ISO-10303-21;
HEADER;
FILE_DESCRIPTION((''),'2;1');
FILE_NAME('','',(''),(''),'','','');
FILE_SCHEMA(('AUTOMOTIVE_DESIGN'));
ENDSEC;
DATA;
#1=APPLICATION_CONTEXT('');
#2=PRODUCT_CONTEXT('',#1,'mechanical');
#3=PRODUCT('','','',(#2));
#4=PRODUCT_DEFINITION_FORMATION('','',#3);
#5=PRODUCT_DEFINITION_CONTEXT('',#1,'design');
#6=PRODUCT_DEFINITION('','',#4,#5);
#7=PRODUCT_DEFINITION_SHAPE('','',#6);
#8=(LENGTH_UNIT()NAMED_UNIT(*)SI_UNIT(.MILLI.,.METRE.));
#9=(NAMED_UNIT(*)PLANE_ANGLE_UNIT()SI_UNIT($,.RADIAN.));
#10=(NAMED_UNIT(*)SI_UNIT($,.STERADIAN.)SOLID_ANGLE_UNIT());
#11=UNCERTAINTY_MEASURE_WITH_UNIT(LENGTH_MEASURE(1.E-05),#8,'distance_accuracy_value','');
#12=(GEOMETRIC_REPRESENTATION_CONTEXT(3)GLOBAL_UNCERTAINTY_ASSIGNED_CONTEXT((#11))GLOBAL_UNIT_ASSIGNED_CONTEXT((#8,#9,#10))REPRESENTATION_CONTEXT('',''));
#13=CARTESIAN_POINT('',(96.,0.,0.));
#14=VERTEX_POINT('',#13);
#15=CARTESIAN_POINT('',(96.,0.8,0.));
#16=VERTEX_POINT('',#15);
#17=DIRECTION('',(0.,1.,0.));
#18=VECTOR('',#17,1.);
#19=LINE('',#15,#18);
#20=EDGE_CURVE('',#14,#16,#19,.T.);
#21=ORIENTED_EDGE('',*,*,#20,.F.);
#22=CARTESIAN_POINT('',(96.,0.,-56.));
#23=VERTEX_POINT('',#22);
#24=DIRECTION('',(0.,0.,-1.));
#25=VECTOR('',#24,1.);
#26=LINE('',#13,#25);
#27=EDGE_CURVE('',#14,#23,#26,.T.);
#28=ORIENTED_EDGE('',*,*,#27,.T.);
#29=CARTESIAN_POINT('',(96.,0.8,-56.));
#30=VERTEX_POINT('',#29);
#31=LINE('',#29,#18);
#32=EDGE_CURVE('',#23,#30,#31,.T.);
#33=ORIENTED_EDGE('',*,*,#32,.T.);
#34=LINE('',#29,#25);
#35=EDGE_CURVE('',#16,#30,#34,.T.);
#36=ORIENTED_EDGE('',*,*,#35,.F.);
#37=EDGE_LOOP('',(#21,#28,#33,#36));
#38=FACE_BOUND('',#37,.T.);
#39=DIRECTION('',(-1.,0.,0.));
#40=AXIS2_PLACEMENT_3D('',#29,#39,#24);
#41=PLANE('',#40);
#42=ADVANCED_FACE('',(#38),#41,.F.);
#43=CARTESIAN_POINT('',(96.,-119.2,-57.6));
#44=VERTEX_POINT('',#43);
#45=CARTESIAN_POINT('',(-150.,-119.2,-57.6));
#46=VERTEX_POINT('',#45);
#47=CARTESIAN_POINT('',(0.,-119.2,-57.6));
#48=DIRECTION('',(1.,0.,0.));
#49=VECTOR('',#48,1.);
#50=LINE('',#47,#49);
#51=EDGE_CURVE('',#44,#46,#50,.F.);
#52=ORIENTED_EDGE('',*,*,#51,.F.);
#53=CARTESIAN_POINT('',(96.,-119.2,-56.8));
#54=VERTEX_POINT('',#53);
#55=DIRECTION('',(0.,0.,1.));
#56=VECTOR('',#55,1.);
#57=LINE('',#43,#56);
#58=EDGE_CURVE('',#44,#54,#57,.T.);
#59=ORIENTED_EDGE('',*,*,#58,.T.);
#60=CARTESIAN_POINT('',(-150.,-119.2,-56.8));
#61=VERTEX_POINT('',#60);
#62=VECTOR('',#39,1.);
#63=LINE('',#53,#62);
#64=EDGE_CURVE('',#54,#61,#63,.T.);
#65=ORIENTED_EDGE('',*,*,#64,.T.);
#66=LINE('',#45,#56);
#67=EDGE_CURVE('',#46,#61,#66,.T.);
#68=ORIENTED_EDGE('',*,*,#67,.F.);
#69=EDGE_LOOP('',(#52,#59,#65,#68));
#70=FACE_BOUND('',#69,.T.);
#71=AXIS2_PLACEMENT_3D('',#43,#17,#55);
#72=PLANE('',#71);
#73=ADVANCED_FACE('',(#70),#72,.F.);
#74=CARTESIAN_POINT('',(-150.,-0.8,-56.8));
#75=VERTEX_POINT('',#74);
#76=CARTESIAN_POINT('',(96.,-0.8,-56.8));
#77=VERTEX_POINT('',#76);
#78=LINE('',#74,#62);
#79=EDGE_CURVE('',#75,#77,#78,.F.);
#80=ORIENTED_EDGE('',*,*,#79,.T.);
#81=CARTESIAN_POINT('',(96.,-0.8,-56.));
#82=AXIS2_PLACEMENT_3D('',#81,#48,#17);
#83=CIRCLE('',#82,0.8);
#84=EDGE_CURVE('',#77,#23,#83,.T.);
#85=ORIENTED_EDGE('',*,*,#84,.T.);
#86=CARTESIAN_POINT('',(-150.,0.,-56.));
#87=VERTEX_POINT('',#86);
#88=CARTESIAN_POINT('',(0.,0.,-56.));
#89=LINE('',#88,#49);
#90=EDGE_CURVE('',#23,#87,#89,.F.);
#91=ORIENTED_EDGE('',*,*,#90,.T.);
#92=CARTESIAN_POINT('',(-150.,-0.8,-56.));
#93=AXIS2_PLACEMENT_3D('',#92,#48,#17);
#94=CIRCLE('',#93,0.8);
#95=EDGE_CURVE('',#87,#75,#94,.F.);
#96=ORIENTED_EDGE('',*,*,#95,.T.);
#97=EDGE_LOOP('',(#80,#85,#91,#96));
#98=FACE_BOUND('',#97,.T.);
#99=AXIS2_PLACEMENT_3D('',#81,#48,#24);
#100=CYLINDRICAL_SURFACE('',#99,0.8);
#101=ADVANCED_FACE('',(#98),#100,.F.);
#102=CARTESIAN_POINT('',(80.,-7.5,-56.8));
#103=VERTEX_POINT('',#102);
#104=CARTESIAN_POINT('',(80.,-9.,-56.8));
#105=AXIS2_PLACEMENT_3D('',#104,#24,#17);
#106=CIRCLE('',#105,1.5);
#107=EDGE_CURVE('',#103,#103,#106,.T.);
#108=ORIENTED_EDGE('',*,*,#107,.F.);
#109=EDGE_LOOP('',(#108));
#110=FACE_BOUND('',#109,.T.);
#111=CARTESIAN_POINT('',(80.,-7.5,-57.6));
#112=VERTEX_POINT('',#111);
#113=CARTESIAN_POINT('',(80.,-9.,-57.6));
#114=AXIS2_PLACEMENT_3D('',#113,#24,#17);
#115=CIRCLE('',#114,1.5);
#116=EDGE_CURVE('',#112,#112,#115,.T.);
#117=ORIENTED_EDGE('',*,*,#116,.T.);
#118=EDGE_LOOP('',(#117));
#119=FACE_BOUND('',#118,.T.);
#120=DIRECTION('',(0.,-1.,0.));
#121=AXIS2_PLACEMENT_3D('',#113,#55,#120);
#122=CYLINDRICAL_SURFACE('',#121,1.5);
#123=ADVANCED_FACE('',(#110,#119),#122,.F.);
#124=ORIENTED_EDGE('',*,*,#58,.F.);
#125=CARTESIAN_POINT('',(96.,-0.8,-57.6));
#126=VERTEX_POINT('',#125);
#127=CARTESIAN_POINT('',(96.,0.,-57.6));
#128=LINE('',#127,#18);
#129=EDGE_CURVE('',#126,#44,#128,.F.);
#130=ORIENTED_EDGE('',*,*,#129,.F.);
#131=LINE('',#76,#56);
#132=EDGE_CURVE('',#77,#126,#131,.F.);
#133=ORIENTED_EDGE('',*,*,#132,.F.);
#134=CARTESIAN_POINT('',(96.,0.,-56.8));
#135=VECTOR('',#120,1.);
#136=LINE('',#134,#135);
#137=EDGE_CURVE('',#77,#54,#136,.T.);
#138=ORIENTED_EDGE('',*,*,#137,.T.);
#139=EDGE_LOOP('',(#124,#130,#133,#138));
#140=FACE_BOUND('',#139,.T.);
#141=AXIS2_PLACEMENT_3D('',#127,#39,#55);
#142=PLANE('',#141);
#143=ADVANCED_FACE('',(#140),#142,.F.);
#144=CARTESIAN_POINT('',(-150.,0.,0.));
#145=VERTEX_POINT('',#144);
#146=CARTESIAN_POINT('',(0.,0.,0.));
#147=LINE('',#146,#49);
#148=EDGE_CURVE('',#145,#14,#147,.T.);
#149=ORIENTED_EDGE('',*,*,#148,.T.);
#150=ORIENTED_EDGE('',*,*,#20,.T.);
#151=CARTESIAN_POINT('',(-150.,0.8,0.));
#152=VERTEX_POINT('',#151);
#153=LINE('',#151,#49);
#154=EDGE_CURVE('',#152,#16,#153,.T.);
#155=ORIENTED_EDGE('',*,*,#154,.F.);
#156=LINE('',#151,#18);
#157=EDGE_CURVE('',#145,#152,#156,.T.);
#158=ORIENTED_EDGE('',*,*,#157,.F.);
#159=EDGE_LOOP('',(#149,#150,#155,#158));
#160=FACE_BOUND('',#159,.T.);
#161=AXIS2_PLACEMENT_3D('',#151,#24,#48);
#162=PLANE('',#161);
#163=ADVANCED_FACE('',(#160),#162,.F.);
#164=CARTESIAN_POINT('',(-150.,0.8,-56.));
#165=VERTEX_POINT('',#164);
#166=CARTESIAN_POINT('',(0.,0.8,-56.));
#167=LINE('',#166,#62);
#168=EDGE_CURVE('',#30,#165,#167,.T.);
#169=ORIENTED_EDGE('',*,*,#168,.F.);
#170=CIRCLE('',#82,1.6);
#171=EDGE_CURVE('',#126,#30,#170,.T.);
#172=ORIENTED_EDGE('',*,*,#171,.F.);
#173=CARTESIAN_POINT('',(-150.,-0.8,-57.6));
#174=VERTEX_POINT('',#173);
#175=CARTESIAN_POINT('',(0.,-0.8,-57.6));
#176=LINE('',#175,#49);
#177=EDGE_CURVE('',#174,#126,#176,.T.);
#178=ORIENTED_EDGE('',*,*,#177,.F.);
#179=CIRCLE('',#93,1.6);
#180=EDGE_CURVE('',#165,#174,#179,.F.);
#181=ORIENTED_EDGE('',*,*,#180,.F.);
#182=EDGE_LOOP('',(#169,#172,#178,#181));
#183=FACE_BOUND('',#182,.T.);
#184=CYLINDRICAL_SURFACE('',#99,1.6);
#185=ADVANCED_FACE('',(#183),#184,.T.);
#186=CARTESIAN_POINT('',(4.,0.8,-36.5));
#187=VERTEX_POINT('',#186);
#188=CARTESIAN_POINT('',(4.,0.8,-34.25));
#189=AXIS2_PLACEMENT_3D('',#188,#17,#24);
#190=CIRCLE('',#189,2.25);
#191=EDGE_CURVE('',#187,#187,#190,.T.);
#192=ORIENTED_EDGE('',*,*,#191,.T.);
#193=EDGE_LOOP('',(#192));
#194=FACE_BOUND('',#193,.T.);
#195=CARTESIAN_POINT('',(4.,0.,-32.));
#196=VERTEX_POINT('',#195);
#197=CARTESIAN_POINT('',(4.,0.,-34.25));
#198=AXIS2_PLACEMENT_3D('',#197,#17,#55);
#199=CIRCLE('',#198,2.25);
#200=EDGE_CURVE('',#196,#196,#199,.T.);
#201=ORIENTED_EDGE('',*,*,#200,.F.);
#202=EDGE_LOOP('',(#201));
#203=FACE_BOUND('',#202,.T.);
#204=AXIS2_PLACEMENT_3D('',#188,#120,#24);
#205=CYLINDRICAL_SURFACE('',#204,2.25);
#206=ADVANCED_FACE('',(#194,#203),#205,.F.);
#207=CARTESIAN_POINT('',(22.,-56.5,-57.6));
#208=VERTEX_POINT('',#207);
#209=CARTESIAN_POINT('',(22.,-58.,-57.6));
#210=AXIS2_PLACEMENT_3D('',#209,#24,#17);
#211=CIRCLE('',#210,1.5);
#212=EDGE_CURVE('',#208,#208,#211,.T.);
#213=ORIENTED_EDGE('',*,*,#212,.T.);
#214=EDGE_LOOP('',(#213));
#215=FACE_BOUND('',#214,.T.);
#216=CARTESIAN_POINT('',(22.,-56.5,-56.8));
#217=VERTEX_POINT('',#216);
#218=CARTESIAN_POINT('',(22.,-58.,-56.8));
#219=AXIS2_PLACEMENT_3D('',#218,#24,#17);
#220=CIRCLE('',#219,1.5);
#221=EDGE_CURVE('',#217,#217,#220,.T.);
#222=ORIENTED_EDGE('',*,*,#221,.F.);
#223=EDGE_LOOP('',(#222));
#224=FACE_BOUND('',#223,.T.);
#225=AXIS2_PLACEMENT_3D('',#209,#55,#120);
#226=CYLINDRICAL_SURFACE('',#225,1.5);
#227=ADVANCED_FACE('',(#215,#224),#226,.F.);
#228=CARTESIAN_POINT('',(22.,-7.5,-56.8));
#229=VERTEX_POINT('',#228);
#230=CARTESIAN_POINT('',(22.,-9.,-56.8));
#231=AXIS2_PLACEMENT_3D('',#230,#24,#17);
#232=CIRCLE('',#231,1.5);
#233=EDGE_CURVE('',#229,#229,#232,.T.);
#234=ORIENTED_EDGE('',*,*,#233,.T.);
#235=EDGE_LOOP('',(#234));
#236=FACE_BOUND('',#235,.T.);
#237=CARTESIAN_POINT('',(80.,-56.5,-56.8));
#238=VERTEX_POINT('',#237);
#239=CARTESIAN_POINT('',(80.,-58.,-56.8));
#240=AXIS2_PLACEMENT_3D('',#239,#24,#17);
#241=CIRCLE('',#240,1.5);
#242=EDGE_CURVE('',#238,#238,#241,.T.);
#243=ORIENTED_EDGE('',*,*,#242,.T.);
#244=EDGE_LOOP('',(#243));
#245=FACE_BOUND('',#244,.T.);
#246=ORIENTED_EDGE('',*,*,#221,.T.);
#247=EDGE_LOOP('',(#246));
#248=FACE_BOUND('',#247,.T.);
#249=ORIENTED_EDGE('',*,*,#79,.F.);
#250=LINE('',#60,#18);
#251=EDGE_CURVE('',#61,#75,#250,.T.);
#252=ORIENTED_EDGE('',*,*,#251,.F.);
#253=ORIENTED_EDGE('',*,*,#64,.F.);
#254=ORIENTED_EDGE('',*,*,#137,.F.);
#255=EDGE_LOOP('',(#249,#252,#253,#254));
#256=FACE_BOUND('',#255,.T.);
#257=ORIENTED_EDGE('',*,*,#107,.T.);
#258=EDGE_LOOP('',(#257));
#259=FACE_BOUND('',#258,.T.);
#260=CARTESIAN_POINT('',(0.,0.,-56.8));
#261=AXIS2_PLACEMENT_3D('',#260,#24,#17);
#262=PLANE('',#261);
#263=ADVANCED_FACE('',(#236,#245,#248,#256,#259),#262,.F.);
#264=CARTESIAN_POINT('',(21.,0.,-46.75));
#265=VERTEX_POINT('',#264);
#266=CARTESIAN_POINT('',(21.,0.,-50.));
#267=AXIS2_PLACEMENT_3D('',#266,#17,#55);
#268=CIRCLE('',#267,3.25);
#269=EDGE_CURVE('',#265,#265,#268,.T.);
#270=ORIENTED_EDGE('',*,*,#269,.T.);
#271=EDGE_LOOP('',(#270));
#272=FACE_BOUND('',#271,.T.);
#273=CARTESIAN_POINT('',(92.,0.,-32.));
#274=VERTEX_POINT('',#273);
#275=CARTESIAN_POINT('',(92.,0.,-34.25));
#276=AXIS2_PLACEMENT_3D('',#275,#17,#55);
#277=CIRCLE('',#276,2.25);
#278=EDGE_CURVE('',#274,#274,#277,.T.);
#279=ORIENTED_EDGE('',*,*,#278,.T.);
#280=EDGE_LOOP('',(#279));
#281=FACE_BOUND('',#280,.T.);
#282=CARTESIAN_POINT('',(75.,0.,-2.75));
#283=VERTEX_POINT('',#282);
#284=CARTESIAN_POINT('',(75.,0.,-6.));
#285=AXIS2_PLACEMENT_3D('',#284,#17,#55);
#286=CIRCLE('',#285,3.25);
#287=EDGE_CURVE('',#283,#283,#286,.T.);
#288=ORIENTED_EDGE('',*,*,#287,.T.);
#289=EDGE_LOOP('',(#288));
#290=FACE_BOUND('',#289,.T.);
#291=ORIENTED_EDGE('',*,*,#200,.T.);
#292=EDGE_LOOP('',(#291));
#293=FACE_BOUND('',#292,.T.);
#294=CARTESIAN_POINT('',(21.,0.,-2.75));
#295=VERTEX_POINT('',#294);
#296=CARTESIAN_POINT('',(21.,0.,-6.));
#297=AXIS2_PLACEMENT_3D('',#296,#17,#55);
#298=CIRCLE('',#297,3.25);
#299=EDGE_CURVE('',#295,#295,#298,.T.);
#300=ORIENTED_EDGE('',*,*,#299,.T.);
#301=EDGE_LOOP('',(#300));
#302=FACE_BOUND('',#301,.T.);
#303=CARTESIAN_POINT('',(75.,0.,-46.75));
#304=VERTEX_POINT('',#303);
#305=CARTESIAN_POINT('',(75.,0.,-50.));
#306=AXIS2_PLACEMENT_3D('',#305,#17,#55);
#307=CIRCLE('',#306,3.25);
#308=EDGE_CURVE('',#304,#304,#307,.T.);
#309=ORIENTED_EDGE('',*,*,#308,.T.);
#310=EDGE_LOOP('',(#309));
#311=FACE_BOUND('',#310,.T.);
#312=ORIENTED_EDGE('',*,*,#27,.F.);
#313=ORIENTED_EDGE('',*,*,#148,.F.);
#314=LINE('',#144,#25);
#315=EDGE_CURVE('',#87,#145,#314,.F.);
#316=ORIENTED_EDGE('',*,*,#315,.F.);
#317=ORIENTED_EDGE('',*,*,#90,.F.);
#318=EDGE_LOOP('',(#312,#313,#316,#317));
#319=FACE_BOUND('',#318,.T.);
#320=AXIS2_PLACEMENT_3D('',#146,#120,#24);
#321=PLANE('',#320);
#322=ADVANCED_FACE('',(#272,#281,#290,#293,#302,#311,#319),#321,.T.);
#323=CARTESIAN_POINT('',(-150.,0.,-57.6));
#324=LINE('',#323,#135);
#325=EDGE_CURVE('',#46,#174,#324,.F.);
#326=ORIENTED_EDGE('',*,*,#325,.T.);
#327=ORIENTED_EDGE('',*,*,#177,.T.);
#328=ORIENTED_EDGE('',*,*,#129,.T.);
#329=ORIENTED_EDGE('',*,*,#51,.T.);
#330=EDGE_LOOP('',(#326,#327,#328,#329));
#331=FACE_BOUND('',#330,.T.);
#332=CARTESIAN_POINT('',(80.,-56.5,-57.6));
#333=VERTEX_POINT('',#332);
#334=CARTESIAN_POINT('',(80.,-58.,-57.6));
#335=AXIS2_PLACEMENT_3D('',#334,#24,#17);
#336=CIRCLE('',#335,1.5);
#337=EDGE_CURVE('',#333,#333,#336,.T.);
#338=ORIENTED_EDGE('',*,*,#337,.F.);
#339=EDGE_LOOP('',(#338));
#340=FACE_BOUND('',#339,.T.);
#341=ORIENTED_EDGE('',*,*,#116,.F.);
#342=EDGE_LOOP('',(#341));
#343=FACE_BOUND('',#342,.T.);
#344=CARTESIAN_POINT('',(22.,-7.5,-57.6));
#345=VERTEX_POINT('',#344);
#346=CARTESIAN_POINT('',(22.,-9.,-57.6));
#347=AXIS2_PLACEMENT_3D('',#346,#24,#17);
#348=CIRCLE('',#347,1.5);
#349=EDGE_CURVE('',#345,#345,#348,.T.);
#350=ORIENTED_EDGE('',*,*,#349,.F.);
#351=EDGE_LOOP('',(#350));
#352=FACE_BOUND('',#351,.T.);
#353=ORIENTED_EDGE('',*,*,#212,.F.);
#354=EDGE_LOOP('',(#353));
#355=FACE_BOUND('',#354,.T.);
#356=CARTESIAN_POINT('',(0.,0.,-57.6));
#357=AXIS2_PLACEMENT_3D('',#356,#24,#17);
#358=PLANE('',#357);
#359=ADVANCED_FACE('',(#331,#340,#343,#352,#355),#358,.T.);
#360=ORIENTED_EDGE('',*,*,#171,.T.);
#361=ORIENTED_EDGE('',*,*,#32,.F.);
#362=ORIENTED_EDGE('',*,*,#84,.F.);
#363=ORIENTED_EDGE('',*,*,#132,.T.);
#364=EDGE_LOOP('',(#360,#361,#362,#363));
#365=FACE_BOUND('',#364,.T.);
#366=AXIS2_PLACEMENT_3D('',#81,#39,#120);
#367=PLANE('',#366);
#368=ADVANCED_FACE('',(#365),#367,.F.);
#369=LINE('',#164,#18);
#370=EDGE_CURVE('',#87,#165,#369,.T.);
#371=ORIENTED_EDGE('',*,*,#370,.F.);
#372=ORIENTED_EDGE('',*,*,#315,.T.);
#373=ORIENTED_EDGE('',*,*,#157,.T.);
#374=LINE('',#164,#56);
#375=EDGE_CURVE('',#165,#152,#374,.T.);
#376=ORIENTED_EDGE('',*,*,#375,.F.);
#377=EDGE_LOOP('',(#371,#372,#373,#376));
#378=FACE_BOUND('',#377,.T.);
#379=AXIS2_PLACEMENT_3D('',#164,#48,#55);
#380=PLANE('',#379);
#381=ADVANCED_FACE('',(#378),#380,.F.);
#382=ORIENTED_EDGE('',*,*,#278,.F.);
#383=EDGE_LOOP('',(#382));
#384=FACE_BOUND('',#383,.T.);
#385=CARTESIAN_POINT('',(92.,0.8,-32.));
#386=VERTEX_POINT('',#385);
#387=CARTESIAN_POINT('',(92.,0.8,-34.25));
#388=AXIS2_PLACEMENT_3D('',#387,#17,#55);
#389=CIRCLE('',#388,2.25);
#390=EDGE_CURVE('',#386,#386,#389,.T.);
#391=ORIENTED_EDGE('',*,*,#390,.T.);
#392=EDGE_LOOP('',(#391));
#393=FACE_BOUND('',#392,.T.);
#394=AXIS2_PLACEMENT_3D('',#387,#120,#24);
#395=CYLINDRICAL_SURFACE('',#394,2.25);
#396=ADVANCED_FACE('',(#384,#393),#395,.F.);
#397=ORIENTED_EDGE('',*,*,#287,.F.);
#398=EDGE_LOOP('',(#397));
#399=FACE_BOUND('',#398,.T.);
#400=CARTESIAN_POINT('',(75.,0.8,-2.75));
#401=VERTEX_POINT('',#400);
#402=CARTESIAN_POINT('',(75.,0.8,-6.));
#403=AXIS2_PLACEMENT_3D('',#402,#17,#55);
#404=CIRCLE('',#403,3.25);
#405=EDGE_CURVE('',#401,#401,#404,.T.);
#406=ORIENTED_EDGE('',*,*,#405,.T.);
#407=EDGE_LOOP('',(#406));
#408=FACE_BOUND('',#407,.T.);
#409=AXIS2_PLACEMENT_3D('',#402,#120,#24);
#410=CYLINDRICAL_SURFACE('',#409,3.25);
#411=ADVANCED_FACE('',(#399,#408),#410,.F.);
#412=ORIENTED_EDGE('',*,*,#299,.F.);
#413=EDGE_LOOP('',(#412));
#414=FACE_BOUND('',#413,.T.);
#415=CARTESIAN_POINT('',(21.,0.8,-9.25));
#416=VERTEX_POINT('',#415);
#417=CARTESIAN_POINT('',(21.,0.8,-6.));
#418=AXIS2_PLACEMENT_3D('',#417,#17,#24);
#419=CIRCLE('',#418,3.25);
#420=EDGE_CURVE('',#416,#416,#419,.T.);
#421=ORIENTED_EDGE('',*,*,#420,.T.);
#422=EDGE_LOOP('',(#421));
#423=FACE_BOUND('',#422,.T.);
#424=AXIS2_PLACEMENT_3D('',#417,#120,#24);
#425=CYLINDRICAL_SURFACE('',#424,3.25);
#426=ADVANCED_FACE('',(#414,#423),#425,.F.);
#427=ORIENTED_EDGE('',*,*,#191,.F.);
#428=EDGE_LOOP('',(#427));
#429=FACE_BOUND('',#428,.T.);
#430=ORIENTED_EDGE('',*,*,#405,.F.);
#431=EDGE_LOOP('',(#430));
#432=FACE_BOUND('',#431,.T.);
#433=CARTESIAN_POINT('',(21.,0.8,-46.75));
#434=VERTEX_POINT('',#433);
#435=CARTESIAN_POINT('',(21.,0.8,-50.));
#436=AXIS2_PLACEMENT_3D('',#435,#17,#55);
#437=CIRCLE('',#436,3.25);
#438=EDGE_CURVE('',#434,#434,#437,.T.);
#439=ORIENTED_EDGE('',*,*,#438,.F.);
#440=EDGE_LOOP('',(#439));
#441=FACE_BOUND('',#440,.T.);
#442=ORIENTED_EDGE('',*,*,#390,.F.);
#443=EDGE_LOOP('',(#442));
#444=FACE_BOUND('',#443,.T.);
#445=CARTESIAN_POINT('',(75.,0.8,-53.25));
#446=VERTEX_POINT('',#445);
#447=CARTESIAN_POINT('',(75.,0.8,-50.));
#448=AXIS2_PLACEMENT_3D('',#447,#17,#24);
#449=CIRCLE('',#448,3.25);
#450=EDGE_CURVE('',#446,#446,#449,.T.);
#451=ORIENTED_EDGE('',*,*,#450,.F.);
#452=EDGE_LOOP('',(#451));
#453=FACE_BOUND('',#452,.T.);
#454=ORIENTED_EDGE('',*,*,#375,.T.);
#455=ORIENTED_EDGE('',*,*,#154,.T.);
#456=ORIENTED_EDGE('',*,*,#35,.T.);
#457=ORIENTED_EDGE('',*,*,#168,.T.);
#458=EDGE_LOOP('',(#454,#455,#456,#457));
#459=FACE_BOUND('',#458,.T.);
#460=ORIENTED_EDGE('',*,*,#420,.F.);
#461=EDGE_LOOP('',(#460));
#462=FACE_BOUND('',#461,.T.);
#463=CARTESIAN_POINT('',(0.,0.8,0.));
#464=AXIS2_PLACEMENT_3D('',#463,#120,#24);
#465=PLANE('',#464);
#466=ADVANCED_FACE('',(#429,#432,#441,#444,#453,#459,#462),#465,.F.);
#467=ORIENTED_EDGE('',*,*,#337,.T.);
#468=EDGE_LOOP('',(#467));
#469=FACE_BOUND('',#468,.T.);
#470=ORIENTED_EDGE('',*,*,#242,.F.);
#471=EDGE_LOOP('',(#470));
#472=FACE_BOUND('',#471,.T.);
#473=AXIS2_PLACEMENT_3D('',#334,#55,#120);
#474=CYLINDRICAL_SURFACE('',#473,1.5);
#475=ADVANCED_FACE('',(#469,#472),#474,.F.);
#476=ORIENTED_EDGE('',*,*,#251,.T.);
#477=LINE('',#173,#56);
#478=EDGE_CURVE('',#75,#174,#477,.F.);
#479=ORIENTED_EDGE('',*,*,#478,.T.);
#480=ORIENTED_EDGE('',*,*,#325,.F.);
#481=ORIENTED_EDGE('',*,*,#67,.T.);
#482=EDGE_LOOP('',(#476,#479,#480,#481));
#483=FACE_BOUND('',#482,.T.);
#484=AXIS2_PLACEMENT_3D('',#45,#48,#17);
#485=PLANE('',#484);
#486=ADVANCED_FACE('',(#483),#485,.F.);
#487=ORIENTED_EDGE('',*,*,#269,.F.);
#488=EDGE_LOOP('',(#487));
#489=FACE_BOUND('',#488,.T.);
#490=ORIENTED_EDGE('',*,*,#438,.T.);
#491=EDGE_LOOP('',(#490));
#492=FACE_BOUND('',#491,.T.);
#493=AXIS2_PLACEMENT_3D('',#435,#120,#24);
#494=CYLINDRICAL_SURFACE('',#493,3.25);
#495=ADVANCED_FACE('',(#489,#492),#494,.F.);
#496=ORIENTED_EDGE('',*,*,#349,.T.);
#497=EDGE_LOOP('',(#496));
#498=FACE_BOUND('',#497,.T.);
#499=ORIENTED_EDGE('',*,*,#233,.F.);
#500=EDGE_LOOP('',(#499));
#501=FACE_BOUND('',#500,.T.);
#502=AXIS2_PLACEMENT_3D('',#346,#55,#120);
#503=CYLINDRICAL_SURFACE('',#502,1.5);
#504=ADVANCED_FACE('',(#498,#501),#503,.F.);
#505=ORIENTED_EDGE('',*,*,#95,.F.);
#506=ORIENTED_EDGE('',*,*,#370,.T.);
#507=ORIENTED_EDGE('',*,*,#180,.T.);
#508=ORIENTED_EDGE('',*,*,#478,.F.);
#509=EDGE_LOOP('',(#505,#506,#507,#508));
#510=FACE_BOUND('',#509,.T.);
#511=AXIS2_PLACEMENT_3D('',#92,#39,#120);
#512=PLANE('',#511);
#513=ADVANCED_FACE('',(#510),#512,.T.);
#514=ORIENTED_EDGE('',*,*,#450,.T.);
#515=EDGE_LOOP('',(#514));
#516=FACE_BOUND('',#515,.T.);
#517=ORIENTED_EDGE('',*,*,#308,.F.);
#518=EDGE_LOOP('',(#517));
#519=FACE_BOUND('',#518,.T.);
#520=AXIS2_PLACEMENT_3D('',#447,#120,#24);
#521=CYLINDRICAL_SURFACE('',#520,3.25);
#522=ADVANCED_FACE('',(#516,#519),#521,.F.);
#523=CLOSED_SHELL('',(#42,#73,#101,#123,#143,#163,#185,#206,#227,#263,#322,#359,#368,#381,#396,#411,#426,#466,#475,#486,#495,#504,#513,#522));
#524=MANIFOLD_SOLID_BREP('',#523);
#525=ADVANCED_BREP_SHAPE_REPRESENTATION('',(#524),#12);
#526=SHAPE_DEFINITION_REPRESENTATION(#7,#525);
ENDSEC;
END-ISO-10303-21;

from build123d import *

# Parameters (mm, degrees)
CROQUIS1_R                  = 3.25
CROQUIS1_R_2                = 2.25
SALIENTE_EXTRUIR1_DEPTH     = 0.8
BRIDA_DE_ARISTA1_DEPTH      = 246
BRIDA_START                 = 0.8
BRIDA_DE_ARISTA1_PROFILE_W  = 246
BRIDA_DE_ARISTA1_PROFILE_H  = 118.4
BRIDA_DE_ARISTA1_PROFILE_R  = 1.5
BRIDA_DE_ARISTA1_FLAT_DEPTH = 0.8


# Sheet-metal steps are written as plain solids
with BuildPart() as part:
    # Croquis1 → Saliente-Extruir1 (new body)
    with BuildSketch(Plane(origin=(0, 0, 0), x_dir=(1, 0, 0), z_dir=(0, 1, 0))):
        Polygon((0, 56), (96, 56), (96, 0), (0, 0), (-150, 0), (-150, 56), align=None)
        with Locations(Location((21, 50, 0), (0, 0, 270))):
            Circle(CROQUIS1_R, mode=Mode.SUBTRACT)
        with Locations(Location((75, 50, 0), (0, 0, 90))):
            Circle(CROQUIS1_R, mode=Mode.SUBTRACT)
        with Locations(Location((75, 6, 0), (0, 0, 270))):
            Circle(CROQUIS1_R, mode=Mode.SUBTRACT)
        with Locations(Location((21, 6, 0), (0, 0, 90))):
            Circle(CROQUIS1_R, mode=Mode.SUBTRACT)
        with Locations(Location((92, 34.25, 0), (0, 0, 270))):
            Circle(CROQUIS1_R_2, mode=Mode.SUBTRACT)
        with Locations(Location((4, 34.25, 0), (0, 0, 90))):
            Circle(CROQUIS1_R_2, mode=Mode.SUBTRACT)
    extrude(amount=SALIENTE_EXTRUIR1_DEPTH)

    # Brida de arista1 bend section (across the edge) → Brida de arista1 (add)
    with BuildSketch(Plane(origin=(-150, 0, -56.8), x_dir=(0, 0, 1), z_dir=(1, 0, 0))):
        with BuildLine():
            Line((-0.8, 0.8), (0, 0.8))
            ThreePointArc((0, 0.8), (0.234314575, 0.234314575), (0.8, 0))
            Line((0.8, 0), (0.8, -0.8))
            ThreePointArc((0.8, -0.8), (-0.33137085, -0.33137085), (-0.8, 0.8))
        make_face()
    extrude(amount=BRIDA_DE_ARISTA1_DEPTH)

    # Brida de arista1 profile (on flange) → Brida de arista1 flat (add)
    with BuildSketch(Plane(origin=(0, 0, -56.8), x_dir=(1, 0, 0), z_dir=(0, 0, -1)).offset(BRIDA_START)):
        with Locations((-27, 60)):
            Rectangle(BRIDA_DE_ARISTA1_PROFILE_W, BRIDA_DE_ARISTA1_PROFILE_H)
        with Locations((22, 9)):
            Circle(BRIDA_DE_ARISTA1_PROFILE_R, mode=Mode.SUBTRACT)
        with Locations((80, 9)):
            Circle(BRIDA_DE_ARISTA1_PROFILE_R, mode=Mode.SUBTRACT)
        with Locations((22, 58)):
            Circle(BRIDA_DE_ARISTA1_PROFILE_R, mode=Mode.SUBTRACT)
        with Locations((80, 58)):
            Circle(BRIDA_DE_ARISTA1_PROFILE_R, mode=Mode.SUBTRACT)
    extrude(amount=-BRIDA_DE_ARISTA1_FLAT_DEPTH)


solid = part.part
